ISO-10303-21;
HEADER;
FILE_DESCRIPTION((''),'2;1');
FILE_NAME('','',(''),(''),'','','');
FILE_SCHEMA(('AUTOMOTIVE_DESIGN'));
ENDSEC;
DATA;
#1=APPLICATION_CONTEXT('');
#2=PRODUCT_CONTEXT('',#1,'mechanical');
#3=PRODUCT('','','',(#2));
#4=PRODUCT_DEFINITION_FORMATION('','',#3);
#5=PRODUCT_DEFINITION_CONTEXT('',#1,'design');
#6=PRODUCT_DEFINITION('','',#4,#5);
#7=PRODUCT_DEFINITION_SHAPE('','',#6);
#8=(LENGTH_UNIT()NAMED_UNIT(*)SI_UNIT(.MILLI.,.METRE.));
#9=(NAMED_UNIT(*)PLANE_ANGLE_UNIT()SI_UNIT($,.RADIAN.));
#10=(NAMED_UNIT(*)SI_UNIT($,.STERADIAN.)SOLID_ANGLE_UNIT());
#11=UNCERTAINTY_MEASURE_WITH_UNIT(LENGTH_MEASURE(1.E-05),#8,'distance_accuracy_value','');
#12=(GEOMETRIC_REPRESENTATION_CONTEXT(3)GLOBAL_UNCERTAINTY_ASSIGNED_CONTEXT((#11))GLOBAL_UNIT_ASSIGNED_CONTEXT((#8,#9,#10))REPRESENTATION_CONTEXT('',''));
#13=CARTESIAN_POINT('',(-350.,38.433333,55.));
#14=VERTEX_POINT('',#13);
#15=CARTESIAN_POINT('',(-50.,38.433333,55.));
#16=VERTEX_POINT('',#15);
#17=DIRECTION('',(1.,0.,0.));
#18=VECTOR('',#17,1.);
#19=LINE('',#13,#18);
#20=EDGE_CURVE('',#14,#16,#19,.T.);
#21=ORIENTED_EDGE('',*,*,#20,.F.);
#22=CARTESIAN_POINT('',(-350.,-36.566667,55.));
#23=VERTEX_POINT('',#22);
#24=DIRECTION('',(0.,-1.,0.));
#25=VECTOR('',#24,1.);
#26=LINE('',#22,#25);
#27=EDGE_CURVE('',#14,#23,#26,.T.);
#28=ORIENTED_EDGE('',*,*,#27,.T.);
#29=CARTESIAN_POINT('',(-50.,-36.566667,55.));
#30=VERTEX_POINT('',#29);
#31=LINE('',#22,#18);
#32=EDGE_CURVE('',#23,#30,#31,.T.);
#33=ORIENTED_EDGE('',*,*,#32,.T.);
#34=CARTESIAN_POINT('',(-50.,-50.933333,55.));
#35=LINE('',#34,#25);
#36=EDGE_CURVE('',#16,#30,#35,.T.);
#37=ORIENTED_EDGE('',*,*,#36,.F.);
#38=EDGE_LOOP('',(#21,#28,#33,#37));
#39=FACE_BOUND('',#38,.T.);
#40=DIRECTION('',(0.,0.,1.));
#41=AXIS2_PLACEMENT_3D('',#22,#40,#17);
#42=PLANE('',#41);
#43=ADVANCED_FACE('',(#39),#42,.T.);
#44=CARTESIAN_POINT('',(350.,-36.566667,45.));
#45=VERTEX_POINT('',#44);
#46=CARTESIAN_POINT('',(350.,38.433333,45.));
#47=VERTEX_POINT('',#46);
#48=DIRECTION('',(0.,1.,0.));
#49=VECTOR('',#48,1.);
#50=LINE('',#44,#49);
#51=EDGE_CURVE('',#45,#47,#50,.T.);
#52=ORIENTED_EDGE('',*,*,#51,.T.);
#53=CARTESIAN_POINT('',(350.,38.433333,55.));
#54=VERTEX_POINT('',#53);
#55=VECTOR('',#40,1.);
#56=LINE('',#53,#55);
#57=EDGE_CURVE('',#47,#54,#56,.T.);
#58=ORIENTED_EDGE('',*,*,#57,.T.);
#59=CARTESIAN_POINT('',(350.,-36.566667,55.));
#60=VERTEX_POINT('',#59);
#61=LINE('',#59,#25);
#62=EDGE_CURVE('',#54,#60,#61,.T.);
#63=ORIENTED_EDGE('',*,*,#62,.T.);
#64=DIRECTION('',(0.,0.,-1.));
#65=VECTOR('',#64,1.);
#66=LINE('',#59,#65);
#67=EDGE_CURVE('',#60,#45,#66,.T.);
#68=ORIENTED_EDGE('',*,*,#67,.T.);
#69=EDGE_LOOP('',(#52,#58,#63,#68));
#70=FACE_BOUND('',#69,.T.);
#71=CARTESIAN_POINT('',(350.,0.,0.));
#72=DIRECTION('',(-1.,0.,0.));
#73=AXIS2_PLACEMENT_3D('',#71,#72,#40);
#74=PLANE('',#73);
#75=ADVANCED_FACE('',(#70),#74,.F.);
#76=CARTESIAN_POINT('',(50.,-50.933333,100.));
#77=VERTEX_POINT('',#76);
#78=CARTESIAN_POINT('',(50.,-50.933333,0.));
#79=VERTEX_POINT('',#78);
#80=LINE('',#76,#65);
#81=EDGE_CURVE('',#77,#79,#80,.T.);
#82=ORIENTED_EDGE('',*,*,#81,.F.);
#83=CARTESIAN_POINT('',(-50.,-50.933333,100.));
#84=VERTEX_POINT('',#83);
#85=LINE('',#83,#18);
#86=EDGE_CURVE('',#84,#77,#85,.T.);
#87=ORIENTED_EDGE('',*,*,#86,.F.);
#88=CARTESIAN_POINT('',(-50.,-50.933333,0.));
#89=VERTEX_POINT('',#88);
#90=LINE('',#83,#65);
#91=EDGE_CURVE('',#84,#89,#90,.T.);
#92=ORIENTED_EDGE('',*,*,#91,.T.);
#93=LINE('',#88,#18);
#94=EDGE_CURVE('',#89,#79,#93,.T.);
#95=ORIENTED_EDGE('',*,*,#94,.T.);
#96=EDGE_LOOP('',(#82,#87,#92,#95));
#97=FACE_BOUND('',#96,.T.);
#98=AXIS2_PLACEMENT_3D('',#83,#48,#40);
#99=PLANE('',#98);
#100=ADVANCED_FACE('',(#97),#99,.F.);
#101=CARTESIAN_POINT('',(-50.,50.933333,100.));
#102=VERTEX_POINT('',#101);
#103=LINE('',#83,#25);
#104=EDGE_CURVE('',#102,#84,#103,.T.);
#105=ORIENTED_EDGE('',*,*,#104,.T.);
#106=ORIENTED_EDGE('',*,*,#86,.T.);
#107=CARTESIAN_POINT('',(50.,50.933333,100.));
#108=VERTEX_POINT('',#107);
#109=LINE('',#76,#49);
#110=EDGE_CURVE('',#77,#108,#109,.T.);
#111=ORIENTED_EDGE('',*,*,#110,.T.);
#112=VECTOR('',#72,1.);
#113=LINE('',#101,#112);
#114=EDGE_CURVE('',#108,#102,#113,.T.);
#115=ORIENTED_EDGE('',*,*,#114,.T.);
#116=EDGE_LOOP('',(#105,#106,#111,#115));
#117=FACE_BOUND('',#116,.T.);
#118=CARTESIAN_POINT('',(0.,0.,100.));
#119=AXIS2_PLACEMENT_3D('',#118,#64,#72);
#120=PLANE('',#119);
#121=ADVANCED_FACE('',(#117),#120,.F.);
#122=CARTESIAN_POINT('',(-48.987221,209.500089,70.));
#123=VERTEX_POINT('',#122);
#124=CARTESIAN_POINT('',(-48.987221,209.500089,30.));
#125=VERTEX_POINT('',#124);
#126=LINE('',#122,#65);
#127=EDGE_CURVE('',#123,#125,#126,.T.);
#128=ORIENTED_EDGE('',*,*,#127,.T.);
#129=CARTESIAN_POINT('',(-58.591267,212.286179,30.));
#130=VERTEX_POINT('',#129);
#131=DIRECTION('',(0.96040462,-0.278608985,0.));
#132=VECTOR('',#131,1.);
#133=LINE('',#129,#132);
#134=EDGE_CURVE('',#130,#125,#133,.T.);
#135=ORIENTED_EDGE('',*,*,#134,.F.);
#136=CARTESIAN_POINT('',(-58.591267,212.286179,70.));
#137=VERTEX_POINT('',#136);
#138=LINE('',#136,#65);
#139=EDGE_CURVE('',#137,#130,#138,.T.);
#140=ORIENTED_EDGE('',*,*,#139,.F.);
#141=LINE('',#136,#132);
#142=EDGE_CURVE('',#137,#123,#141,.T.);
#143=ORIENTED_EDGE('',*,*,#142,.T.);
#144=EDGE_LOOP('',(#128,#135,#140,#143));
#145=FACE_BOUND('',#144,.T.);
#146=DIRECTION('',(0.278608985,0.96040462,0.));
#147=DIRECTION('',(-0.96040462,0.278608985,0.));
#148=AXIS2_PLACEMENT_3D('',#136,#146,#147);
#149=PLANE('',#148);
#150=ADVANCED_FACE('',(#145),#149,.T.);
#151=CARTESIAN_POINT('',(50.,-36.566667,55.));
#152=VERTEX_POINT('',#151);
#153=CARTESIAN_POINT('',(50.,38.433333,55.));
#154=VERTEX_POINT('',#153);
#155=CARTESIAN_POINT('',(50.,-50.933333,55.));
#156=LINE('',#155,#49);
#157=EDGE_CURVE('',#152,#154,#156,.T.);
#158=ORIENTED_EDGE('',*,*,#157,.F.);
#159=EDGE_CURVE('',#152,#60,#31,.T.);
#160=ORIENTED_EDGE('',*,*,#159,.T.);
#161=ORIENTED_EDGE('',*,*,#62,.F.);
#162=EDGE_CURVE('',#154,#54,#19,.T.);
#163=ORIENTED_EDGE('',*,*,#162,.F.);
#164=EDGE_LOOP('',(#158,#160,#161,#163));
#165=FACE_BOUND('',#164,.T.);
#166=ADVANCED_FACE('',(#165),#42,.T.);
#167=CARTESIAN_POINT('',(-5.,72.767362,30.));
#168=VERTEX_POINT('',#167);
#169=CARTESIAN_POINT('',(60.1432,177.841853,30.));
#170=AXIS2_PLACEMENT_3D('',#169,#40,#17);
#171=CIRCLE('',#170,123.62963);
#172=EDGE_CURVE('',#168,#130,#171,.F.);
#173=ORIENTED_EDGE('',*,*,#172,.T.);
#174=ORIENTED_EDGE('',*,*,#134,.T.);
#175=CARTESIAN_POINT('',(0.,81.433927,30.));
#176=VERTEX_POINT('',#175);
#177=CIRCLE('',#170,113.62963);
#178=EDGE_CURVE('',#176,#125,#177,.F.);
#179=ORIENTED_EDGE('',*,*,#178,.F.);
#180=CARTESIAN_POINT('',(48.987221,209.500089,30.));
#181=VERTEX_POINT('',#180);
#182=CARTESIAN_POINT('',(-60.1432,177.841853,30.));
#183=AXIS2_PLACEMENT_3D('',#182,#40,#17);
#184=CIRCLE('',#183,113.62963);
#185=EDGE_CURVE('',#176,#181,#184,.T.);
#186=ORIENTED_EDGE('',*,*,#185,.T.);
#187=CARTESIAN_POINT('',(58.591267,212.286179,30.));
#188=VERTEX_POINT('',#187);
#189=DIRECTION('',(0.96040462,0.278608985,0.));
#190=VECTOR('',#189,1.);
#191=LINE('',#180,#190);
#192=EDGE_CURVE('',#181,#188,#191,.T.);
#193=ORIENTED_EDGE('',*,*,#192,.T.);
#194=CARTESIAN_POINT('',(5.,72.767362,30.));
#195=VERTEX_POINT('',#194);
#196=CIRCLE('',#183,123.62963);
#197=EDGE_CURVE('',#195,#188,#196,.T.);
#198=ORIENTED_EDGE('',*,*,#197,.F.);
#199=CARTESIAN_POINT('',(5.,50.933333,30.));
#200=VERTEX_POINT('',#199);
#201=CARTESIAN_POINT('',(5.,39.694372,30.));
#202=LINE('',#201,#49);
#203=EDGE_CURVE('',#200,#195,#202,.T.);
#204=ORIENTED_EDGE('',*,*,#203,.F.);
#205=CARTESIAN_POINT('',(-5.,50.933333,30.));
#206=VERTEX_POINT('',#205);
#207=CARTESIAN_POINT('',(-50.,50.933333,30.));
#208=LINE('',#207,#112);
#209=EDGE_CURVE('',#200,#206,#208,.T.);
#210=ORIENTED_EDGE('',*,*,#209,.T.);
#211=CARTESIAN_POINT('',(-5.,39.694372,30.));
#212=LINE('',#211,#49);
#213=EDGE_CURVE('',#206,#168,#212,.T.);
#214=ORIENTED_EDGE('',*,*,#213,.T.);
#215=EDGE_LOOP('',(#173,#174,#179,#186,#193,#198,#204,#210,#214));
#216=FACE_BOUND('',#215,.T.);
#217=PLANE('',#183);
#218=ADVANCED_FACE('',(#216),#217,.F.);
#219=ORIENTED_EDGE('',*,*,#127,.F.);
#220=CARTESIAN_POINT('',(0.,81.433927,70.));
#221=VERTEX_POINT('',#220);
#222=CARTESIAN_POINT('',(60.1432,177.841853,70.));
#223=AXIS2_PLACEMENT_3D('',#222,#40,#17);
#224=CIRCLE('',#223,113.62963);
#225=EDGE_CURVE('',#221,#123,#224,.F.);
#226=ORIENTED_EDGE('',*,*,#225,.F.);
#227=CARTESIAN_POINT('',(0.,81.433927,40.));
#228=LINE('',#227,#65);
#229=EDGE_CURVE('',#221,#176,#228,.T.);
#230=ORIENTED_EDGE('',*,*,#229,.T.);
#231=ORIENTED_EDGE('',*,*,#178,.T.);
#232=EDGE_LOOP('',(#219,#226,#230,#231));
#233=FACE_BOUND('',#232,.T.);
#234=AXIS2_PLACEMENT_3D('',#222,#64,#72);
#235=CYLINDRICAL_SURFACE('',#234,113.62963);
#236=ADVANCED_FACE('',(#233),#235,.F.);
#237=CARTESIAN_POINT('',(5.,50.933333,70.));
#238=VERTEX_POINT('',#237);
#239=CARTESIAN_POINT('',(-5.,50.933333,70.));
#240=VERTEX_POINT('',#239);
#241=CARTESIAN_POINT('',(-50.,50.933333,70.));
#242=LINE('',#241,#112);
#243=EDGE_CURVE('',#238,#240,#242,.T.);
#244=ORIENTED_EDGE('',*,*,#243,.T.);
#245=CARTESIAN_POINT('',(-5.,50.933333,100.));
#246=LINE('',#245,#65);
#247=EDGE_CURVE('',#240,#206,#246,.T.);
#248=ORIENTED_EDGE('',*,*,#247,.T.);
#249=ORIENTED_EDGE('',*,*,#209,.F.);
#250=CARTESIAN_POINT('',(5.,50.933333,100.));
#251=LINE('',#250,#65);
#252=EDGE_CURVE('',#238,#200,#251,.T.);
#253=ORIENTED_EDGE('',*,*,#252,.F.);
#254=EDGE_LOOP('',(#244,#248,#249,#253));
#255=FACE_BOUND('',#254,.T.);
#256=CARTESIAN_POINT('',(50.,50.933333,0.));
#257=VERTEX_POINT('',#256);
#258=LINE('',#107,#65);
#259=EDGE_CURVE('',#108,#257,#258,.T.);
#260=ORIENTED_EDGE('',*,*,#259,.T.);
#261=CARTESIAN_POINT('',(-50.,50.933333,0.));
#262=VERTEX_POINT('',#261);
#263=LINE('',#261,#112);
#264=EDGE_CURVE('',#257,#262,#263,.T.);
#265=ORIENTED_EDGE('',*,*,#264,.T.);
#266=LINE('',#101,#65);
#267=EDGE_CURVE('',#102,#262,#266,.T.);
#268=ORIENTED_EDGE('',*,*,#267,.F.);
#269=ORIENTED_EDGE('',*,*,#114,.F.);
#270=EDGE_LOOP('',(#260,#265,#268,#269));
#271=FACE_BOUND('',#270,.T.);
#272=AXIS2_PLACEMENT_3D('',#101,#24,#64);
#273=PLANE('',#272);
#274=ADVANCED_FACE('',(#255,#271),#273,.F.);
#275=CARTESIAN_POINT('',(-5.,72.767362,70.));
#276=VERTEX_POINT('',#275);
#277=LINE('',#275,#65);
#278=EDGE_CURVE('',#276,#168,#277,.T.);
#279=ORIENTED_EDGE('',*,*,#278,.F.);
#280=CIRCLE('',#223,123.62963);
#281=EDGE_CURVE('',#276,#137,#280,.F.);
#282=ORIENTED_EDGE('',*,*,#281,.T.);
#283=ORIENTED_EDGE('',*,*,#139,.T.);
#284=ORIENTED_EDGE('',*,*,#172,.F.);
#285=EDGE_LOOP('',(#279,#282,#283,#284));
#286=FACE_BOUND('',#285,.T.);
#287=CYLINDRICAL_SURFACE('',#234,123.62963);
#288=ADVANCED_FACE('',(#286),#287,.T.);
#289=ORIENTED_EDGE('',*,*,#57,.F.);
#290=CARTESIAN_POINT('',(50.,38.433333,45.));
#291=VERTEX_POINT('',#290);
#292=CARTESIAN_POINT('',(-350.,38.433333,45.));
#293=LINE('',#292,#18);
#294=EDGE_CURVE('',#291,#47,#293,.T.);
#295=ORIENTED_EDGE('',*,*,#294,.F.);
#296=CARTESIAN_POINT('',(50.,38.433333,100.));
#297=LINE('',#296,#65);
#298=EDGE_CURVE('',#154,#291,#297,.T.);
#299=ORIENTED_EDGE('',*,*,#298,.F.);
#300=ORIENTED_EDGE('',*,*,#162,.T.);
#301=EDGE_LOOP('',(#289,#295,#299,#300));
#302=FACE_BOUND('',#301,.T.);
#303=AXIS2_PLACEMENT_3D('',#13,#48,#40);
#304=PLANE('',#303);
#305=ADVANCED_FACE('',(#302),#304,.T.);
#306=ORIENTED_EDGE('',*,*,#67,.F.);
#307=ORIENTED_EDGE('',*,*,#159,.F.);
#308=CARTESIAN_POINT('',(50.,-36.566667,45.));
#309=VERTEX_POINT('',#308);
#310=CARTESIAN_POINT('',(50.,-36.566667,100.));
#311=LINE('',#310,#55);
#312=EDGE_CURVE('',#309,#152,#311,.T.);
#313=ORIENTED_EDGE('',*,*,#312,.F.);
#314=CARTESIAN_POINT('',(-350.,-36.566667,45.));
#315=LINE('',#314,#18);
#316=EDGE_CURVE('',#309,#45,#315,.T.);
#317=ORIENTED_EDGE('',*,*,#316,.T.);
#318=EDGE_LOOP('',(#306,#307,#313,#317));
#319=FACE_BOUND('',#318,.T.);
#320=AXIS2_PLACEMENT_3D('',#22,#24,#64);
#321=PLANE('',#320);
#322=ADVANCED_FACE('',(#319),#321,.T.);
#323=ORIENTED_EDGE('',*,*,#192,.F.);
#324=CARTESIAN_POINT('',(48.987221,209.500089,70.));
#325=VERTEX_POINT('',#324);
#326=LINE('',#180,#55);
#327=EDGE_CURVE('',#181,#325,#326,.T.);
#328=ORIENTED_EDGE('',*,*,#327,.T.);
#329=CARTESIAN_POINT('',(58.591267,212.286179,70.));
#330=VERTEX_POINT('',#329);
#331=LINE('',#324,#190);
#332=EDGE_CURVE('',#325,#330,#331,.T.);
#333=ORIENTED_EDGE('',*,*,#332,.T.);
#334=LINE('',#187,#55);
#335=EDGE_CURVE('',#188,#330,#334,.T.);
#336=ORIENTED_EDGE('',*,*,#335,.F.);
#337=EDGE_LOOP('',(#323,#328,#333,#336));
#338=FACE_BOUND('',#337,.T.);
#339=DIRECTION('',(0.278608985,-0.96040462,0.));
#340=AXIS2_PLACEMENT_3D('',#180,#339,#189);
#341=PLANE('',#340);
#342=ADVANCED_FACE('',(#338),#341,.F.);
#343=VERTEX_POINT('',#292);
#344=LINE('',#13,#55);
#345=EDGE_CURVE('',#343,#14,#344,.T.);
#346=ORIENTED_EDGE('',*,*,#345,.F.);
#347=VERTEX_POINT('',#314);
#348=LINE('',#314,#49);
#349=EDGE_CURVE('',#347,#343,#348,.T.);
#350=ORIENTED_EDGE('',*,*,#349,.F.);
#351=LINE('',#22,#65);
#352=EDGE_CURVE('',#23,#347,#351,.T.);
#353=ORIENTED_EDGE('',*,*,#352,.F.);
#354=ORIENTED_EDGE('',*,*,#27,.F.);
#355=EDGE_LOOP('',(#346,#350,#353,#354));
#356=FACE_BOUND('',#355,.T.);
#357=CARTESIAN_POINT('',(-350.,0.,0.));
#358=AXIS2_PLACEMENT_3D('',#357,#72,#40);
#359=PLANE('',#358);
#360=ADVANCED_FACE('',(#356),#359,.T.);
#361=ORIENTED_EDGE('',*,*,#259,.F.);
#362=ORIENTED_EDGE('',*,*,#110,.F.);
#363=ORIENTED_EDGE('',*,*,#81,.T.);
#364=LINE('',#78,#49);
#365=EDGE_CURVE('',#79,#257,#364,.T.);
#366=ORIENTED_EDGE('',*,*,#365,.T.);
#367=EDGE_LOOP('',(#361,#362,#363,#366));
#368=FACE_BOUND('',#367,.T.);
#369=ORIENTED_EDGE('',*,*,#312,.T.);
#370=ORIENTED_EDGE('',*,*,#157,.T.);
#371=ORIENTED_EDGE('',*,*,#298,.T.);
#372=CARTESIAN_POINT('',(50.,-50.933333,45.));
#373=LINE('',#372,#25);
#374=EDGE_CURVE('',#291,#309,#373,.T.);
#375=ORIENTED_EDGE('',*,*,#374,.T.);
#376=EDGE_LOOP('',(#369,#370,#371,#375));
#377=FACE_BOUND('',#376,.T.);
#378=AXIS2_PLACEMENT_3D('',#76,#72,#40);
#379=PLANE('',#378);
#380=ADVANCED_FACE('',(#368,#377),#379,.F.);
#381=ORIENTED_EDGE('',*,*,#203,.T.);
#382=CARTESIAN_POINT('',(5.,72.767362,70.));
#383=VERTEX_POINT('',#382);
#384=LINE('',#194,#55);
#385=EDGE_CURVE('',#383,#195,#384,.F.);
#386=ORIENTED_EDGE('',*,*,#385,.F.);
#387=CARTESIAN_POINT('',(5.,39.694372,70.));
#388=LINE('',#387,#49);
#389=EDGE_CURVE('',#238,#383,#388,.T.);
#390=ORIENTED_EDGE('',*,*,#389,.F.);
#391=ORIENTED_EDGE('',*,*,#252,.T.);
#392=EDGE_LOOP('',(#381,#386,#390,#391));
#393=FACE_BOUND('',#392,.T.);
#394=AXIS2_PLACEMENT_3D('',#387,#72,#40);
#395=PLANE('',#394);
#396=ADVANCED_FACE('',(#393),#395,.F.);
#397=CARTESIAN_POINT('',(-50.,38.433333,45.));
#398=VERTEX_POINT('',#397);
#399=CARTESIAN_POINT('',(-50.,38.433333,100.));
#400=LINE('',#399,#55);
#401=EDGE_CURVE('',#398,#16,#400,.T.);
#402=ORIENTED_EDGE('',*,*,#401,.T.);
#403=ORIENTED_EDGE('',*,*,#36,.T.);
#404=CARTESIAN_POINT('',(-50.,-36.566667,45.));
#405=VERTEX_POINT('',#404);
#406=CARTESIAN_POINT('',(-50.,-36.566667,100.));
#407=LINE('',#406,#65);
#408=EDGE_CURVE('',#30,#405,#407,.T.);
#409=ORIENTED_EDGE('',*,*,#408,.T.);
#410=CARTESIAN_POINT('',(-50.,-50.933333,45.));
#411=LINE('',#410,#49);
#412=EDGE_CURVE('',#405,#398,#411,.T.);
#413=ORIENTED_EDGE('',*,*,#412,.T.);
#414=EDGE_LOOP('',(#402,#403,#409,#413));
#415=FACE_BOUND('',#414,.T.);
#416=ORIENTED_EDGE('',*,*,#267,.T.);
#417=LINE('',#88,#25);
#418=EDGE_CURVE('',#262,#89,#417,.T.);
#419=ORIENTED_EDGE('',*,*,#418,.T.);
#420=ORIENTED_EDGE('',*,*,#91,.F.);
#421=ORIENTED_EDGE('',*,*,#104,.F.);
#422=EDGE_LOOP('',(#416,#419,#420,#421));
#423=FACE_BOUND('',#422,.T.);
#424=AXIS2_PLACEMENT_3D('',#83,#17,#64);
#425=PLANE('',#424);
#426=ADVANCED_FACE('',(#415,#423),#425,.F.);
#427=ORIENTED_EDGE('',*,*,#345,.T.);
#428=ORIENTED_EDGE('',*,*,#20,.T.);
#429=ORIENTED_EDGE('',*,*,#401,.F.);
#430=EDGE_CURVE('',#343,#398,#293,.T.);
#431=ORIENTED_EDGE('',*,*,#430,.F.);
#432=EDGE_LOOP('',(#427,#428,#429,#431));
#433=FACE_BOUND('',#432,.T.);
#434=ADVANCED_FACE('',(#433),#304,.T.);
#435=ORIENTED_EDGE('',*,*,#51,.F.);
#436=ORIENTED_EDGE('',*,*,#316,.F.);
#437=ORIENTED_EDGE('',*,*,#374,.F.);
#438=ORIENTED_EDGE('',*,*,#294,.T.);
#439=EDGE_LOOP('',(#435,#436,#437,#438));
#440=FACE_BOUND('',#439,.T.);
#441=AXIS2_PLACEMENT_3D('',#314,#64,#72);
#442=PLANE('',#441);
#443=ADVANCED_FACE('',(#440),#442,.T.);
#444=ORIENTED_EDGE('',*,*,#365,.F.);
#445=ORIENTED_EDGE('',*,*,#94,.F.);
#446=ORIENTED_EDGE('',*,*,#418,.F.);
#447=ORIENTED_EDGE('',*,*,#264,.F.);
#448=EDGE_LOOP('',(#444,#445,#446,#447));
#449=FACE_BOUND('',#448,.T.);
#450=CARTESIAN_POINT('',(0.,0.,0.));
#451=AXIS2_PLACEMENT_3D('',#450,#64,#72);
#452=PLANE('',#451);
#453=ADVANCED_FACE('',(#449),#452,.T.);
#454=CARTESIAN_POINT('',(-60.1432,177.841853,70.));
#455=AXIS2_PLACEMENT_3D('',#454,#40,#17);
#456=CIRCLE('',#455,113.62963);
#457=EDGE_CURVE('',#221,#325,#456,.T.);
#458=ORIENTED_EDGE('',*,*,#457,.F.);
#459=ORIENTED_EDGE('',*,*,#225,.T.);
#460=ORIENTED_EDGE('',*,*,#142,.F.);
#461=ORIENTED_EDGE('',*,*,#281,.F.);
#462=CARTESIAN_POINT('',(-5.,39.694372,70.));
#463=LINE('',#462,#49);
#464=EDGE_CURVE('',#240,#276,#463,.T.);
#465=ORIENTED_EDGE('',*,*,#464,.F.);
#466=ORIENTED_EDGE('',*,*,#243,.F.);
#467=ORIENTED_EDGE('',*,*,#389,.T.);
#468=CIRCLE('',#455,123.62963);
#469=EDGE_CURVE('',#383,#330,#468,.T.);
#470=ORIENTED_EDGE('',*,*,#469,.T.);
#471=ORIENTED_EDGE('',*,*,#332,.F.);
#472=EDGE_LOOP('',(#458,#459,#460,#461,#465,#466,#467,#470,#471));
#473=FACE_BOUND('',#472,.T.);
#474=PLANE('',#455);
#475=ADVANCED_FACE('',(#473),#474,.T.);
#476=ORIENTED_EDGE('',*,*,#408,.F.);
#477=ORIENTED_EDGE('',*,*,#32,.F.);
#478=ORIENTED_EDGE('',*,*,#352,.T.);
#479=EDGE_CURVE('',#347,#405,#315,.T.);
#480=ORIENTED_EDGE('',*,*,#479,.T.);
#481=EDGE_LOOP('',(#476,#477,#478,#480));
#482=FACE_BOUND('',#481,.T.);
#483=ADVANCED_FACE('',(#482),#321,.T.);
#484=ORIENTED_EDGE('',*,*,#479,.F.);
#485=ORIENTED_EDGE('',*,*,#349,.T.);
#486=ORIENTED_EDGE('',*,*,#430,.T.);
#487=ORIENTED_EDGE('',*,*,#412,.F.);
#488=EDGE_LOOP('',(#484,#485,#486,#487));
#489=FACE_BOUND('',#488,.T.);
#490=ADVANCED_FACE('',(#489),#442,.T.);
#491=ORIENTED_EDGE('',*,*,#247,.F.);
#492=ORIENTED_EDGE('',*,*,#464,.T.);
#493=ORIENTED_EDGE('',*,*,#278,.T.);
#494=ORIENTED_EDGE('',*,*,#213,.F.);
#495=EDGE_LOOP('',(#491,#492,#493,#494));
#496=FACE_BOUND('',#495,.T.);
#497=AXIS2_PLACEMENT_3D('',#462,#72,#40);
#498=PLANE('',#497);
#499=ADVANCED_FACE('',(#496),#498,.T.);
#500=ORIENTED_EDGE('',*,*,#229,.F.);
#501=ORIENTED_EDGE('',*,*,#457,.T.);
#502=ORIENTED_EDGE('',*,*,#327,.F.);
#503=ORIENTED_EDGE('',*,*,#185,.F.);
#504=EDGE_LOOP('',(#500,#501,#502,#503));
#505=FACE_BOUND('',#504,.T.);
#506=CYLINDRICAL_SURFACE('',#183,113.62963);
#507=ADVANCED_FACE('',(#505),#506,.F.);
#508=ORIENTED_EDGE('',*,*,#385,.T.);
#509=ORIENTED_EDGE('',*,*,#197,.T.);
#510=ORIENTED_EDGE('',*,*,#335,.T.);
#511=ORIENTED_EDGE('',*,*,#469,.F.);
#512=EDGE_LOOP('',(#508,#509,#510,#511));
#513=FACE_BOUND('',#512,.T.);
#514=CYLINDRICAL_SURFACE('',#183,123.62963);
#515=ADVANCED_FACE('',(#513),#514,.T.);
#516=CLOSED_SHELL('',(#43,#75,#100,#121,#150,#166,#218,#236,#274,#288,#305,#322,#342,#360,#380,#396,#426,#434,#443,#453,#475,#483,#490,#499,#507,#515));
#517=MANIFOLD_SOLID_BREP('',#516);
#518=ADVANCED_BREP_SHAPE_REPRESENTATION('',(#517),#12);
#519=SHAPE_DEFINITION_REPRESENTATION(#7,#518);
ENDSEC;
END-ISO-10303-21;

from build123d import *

# Parameters (mm, degrees)
SKETCH1_W                = 100
SKETCH1_H                = 101.866666666
BOSS_EXTRUDE1_DEPTH      = 100
BOSS_EXTRUDE2_DEPTH      = 300
BOSS_EXTRUDE2_DEPTH_BACK = 400
SKETCH2_W                = 10
SKETCH2_H                = 75
EXTRUDE_THIN1_START      = -20
EXTRUDE_THIN1_DEPTH      = 40


# Read off the part's stored shape, not the designer's step: Extrude-Thin1
with BuildPart() as part:
    # Sketch1 → Boss-Extrude1 (new body)
    with BuildSketch(Plane.XY):
        Rectangle(SKETCH1_W, SKETCH1_H)
    extrude(amount=BOSS_EXTRUDE1_DEPTH)

    # Sketch2 → Boss-Extrude2 (add, two sides: drawn at the far end of the back side and taken through both)
    with BuildSketch(Plane(origin=(50, 0, 0), x_dir=(0, 0, -1), z_dir=(1, 0, 0)).offset(-BOSS_EXTRUDE2_DEPTH_BACK)):
        with Locations((-50, 0.933333333)):
            Rectangle(SKETCH2_W, SKETCH2_H)
    extrude(amount=BOSS_EXTRUDE2_DEPTH + BOSS_EXTRUDE2_DEPTH_BACK)

    # Extrude-Thin1 outline → Extrude-Thin1 (add)
    with BuildSketch(Plane.XY.offset(50).offset(EXTRUDE_THIN1_START)):
        with BuildLine():
            Line((5, 50.933333333), (5, 72.767361549))
            ThreePointArc((5, 72.767361549), (55.2653102, 133.511715936), (58.591267344, 212.286178857))
            Line((58.591267344, 212.286178857), (48.987221146, 209.500089011))
            ThreePointArc((48.987221146, 209.500089011), (45.987027323, 137.245454908), (0, 81.433927153))
            ThreePointArc((0, 81.433927153), (-45.987027323, 137.245454908), (-48.987221146, 209.500089011))
            Line((-48.987221146, 209.500089011), (-58.591267344, 212.286178857))
            ThreePointArc((-58.591267344, 212.286178857), (-55.2653102, 133.511715936), (-5, 72.767361549))
            Line((-5, 72.767361549), (-5, 50.933333333))
            Line((-5, 50.933333333), (5, 50.933333333))
        make_face()
    extrude(amount=EXTRUDE_THIN1_DEPTH)


solid = part.part
